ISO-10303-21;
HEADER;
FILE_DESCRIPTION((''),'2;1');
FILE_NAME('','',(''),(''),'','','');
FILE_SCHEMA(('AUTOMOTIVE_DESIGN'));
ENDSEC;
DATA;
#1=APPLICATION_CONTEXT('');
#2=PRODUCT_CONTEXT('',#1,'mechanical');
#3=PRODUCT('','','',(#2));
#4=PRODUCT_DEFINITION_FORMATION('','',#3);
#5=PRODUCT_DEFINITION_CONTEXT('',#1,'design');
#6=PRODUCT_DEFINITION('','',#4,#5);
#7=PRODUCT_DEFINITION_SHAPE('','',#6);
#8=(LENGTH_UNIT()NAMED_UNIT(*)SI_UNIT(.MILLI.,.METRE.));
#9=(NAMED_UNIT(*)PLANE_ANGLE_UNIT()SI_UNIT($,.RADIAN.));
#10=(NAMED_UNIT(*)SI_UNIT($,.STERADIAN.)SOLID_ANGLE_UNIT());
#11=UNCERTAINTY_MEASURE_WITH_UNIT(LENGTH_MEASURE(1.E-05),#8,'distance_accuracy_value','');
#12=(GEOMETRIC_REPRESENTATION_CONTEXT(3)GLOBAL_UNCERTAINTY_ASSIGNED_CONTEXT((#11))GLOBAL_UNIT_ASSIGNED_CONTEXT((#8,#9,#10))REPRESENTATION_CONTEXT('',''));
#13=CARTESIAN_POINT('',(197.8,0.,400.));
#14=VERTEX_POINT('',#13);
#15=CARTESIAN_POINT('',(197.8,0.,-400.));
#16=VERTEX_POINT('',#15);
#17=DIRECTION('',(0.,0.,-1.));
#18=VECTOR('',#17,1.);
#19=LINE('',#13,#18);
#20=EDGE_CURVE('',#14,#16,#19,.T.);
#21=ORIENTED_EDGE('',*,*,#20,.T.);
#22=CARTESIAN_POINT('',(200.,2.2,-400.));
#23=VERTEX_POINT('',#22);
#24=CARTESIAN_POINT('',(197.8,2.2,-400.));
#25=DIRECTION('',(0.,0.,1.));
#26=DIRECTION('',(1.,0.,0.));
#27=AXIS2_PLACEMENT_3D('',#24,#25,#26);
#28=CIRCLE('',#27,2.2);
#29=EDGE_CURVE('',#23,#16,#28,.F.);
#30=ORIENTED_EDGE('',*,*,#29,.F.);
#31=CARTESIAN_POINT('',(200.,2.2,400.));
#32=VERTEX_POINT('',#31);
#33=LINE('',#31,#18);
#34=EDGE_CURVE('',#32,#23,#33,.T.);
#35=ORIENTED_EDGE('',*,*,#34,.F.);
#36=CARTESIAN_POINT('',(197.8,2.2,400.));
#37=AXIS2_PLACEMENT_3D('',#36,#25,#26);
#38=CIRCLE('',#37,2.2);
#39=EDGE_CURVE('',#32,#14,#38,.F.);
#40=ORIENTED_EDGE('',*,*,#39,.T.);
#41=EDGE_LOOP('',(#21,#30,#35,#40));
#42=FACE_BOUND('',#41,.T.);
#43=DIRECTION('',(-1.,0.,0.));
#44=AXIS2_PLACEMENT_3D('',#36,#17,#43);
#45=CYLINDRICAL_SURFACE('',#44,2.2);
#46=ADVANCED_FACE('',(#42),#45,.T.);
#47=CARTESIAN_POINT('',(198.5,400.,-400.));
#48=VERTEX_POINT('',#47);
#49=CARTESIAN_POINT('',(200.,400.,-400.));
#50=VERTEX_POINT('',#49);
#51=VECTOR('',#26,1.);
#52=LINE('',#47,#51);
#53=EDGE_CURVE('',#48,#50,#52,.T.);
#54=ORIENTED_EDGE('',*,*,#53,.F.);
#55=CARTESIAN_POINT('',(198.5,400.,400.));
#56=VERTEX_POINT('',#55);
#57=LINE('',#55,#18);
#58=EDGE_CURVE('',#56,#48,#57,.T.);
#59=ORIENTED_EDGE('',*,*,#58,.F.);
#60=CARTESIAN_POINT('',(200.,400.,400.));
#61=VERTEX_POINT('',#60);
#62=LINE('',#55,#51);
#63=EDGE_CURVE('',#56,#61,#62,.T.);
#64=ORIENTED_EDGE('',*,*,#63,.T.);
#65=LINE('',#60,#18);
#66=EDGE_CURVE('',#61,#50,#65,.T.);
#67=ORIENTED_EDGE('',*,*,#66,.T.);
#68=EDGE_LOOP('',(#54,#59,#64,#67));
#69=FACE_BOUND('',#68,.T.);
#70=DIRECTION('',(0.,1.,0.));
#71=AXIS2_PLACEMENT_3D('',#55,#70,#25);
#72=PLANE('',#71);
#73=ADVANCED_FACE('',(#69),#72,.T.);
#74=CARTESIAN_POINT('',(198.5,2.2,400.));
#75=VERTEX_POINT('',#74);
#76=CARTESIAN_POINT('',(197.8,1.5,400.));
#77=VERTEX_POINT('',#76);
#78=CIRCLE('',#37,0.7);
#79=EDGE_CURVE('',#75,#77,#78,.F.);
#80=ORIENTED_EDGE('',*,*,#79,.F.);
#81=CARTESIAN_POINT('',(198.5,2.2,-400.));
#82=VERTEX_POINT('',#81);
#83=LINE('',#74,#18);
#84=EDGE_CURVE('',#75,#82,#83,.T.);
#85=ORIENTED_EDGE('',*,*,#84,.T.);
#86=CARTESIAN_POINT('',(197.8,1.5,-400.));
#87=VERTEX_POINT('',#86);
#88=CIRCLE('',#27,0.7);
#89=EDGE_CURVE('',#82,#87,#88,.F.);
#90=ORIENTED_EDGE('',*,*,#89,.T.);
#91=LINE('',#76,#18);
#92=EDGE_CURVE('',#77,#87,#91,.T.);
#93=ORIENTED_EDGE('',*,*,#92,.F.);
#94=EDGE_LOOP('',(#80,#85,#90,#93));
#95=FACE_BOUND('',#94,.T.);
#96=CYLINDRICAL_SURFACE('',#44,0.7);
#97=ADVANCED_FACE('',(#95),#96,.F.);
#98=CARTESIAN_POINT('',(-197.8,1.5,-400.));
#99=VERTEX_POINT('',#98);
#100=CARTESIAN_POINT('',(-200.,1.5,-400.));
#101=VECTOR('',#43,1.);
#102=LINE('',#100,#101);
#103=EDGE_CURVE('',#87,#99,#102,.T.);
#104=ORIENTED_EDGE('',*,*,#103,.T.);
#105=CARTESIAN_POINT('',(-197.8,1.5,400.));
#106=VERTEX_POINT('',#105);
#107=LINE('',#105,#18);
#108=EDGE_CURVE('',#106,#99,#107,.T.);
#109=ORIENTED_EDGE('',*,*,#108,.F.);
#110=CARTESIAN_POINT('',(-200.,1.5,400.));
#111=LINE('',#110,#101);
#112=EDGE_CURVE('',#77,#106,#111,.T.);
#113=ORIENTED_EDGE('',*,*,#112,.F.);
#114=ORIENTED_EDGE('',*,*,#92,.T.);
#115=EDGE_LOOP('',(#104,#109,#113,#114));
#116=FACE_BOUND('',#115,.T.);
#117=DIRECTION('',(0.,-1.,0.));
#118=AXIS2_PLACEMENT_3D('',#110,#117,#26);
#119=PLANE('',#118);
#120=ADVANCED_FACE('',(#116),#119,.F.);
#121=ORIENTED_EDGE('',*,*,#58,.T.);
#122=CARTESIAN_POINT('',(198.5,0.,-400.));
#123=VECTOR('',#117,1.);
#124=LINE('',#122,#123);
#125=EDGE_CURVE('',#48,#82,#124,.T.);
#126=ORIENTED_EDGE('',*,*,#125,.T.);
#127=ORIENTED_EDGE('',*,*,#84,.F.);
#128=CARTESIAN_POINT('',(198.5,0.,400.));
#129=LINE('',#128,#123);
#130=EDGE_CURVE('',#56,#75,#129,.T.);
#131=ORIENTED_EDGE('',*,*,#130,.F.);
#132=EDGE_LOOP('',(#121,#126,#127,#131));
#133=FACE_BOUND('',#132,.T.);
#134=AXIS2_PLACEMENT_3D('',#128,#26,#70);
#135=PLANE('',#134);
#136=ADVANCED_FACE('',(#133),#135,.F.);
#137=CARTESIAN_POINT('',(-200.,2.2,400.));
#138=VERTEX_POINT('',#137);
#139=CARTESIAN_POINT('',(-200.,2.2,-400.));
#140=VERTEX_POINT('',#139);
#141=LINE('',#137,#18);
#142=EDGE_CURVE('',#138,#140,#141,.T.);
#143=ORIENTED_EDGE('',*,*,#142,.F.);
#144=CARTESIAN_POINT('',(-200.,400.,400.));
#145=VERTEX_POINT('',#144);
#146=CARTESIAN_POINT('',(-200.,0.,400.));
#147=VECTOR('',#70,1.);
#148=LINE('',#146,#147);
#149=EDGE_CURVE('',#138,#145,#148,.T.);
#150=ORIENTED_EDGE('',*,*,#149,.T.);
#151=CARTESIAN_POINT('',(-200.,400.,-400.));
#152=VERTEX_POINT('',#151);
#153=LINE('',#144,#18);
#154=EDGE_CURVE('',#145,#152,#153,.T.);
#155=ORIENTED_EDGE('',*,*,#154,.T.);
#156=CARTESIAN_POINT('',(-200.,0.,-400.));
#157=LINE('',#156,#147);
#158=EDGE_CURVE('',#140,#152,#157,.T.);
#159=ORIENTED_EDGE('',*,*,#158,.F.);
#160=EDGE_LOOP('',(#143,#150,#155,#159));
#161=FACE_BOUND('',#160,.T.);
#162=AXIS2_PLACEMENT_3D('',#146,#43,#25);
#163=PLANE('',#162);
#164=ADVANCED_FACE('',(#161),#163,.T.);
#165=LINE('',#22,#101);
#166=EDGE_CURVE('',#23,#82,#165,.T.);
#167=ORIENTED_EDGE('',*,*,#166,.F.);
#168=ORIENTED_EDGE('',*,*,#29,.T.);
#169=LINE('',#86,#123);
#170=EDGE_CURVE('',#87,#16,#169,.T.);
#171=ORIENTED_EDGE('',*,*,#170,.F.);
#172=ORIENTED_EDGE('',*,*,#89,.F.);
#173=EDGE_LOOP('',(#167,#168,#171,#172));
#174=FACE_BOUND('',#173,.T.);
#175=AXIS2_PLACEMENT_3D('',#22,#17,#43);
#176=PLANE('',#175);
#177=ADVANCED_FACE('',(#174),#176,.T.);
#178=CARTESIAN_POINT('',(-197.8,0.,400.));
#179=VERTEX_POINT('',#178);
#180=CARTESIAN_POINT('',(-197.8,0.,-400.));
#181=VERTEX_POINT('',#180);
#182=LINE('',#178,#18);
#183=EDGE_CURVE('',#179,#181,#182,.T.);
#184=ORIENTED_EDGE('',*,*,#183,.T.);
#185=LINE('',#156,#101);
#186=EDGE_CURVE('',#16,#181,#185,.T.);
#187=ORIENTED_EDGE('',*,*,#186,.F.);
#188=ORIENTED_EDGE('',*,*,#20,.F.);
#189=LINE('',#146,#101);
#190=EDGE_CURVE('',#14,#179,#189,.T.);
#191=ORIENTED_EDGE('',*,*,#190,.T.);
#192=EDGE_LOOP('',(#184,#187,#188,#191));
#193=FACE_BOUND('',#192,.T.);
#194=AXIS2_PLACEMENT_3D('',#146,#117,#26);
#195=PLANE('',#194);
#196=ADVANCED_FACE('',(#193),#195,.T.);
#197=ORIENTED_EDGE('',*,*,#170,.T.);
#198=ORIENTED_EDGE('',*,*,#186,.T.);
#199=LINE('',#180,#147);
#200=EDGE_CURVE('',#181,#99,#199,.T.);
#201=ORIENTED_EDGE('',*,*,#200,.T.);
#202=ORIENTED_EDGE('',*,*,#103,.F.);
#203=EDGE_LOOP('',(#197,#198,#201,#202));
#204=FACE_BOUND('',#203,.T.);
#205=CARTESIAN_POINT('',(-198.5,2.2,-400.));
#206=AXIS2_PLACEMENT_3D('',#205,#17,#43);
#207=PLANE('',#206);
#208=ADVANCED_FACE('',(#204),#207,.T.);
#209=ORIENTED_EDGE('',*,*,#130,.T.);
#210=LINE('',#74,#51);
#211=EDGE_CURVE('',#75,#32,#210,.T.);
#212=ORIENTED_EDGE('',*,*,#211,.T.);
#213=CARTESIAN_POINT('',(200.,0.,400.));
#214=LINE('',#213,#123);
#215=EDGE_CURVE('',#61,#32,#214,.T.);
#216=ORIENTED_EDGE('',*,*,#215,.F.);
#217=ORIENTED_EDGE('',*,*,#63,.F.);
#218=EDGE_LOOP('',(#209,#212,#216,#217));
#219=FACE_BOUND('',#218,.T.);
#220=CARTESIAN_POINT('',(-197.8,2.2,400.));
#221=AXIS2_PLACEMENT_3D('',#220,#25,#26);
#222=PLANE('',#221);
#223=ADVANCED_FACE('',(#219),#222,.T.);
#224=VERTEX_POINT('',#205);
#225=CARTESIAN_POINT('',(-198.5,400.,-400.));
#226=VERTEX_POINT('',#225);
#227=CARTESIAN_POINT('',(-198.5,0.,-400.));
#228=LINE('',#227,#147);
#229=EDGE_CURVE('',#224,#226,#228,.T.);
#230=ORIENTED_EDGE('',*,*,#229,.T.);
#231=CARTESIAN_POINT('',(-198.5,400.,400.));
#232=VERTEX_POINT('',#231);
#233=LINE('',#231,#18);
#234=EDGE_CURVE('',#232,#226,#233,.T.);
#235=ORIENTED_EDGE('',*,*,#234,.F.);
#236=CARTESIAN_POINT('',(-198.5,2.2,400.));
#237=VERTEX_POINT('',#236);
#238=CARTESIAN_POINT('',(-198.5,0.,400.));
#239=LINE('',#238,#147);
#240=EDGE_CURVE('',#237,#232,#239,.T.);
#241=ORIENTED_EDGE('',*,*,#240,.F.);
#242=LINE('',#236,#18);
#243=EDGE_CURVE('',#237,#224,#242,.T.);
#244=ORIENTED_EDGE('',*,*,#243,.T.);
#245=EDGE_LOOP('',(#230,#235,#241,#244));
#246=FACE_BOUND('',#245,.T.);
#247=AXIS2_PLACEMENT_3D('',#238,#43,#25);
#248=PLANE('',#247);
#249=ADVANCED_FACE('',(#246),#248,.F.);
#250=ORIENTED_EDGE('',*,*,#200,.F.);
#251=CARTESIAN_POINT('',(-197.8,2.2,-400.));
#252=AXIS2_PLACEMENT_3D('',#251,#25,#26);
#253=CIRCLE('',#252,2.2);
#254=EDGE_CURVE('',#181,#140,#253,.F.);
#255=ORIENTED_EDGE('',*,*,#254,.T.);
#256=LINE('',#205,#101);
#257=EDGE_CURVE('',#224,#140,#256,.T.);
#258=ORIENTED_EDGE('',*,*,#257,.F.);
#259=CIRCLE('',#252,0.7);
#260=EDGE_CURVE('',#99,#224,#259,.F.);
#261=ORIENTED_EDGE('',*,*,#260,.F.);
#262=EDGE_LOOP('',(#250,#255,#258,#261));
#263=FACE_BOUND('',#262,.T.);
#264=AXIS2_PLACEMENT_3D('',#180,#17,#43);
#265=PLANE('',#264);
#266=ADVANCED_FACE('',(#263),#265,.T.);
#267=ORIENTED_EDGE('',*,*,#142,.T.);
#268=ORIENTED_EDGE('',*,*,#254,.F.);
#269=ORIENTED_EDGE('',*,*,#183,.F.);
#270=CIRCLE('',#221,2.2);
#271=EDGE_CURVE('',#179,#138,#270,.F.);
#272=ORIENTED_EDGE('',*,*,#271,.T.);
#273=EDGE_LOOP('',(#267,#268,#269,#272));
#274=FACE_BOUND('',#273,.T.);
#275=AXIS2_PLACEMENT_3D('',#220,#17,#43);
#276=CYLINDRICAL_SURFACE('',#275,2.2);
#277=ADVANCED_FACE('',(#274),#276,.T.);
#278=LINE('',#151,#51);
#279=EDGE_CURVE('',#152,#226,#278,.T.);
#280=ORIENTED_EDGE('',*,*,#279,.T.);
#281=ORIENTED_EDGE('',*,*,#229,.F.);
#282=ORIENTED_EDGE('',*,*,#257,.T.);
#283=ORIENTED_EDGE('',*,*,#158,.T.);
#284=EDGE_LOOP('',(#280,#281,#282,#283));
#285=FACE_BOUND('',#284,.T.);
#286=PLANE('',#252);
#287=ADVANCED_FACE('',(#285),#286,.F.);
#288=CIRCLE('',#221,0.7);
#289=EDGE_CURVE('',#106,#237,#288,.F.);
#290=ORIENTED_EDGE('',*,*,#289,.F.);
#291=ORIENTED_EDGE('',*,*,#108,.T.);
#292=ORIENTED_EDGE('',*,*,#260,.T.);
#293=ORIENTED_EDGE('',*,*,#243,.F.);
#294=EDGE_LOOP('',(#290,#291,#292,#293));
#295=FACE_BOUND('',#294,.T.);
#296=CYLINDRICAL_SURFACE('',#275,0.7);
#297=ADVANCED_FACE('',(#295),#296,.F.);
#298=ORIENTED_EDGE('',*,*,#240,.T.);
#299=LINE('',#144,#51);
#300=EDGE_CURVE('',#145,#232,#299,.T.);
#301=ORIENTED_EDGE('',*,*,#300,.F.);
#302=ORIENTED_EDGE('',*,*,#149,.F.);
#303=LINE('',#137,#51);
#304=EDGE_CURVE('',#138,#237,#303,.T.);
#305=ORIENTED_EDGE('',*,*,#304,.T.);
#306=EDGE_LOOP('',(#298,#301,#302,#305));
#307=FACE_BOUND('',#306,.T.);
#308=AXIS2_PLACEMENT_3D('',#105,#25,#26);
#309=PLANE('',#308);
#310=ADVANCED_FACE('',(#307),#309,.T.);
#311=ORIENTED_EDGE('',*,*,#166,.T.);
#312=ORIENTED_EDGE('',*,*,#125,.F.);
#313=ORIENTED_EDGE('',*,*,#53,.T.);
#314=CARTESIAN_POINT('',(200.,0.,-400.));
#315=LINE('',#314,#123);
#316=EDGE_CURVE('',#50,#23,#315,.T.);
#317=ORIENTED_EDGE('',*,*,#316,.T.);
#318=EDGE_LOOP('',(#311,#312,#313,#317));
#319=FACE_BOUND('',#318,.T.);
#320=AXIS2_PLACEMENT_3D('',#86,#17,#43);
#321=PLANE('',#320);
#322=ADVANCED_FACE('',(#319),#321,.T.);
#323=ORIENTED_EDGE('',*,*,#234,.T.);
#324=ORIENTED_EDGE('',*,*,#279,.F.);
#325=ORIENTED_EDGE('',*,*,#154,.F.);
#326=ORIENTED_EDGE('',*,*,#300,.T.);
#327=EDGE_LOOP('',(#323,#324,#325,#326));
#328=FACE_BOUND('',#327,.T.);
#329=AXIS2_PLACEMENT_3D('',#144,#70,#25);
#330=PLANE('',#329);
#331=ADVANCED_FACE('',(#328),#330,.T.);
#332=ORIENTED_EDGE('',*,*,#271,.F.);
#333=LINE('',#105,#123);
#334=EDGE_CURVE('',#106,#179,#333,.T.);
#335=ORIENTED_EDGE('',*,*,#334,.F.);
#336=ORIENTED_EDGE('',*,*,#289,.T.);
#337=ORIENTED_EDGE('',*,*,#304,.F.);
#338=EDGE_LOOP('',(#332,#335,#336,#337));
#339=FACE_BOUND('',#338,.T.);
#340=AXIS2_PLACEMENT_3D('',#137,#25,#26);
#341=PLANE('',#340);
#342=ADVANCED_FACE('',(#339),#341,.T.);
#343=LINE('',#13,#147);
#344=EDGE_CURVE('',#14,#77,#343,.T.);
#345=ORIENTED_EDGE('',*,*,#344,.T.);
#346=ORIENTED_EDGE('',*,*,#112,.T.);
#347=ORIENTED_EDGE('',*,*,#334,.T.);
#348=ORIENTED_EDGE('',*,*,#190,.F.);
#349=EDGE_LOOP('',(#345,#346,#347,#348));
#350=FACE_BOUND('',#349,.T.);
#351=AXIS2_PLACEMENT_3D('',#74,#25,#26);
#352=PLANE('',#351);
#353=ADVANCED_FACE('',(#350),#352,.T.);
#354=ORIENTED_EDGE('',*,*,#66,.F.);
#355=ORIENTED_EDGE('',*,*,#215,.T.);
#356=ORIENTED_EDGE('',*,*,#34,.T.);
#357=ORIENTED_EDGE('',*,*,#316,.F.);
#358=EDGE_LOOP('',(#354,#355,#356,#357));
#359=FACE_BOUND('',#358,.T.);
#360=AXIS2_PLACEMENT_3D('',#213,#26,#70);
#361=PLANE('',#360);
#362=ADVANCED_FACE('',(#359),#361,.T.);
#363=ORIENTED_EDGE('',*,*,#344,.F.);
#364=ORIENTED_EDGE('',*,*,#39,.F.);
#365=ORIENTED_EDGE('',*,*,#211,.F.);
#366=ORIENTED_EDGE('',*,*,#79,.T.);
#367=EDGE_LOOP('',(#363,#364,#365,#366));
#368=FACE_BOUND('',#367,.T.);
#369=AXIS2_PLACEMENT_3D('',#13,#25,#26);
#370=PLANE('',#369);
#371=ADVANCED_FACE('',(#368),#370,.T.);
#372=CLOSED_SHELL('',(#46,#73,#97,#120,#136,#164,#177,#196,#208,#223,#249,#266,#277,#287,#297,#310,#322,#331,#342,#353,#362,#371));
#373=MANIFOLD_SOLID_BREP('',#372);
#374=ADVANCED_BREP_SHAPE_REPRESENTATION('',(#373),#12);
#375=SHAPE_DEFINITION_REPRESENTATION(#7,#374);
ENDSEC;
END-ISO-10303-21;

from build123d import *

# Parameters (mm, degrees)
BASE_FLANGE1_DEPTH = 400


# Sheet-metal steps are written as plain solids
with BuildPart() as part:
    # Sketch1 → Base-Flange1 (new, symmetric)
    with BuildSketch(Plane.XY):
        with BuildLine():
            Line((-200, 400), (-200, 2.2))
            ThreePointArc((-200, 2.2), (-199.355634919, 0.644365081), (-197.8, 0))
            Line((-197.8, 0), (197.8, 0))
            ThreePointArc((197.8, 0), (199.355634919, 0.644365081), (200, 2.2))
            Line((200, 2.2), (200, 400))
            Line((200, 400), (198.5, 400))
            Line((198.5, 400), (198.5, 2.2))
            ThreePointArc((198.5, 2.2), (198.294974747, 1.705025253), (197.8, 1.5))
            Line((197.8, 1.5), (-197.8, 1.5))
            ThreePointArc((-197.8, 1.5), (-198.294974747, 1.705025253), (-198.5, 2.2))
            Line((-198.5, 2.2), (-198.5, 400))
            Line((-198.5, 400), (-200, 400))
        make_face()
    extrude(amount=BASE_FLANGE1_DEPTH, both=True)


solid = part.part
